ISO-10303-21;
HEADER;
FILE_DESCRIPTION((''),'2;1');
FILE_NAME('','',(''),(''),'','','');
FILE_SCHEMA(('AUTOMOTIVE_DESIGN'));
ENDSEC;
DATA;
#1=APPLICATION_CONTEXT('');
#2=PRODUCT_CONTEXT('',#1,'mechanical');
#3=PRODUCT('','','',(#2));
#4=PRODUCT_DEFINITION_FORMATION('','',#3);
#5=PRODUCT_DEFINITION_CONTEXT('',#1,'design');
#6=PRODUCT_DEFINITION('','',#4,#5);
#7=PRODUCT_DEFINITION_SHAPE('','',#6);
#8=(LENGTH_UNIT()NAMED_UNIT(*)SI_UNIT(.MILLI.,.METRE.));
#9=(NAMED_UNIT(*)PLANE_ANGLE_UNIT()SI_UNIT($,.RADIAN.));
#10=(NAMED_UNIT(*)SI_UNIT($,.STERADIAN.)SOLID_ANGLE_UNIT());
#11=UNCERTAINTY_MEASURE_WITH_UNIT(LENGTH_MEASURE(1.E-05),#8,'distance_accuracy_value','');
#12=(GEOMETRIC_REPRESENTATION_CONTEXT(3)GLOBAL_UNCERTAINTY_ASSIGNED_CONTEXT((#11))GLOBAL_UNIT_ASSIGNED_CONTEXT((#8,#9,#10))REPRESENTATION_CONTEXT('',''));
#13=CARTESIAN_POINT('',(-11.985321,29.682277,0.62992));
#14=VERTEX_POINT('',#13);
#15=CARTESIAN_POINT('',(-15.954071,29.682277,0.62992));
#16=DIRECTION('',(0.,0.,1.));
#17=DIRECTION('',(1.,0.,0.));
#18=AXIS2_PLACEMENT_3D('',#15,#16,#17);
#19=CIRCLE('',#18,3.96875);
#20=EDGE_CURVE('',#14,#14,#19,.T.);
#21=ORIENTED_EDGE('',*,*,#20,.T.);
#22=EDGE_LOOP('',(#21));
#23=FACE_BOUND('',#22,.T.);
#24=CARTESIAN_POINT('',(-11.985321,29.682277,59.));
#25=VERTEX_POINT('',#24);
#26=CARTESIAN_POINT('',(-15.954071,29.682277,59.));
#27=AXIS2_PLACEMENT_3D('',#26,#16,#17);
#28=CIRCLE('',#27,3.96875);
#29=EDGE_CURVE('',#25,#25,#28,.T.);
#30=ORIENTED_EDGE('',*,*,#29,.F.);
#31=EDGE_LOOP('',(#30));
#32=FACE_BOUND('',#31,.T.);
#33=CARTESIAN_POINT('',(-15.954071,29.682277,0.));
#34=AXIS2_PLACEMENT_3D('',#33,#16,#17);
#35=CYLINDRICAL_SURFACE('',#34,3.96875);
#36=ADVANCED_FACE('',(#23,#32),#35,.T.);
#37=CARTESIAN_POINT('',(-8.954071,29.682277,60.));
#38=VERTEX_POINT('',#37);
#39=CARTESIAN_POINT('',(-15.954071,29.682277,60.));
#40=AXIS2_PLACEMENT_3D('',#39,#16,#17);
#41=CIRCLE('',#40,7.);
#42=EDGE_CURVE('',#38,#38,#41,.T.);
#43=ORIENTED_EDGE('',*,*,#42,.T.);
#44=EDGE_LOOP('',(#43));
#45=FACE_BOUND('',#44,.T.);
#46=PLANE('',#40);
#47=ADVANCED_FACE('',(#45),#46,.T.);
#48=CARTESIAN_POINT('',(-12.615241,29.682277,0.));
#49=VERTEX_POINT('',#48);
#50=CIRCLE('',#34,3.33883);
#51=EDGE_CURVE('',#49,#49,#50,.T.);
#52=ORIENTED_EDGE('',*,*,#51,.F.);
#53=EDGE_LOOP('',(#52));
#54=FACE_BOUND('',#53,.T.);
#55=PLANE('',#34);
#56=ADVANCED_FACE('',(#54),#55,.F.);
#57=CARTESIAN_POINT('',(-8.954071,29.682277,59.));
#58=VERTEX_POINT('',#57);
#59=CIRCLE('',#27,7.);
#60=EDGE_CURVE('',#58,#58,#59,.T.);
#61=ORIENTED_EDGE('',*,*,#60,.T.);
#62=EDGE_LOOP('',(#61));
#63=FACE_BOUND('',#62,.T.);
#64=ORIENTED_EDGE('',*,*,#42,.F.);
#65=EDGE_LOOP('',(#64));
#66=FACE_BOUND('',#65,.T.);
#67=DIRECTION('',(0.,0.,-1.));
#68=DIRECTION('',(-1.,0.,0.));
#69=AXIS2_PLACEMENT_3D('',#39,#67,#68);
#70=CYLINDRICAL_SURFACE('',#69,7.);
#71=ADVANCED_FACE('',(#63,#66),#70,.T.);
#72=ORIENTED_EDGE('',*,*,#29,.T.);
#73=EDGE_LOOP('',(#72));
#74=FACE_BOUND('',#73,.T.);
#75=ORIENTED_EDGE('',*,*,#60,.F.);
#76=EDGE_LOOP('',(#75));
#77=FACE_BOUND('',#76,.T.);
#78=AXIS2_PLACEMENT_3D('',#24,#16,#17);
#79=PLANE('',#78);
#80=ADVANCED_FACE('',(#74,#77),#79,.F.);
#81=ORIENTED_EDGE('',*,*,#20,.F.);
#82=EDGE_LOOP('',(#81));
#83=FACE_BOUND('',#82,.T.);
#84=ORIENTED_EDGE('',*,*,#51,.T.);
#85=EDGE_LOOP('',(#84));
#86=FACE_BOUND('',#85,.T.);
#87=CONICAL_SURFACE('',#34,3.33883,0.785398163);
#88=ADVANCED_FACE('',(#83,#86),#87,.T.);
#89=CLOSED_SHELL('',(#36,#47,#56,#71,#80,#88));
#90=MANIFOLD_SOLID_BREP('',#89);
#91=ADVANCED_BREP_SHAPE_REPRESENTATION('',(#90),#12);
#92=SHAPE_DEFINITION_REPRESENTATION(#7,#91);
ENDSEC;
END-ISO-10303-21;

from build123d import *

# Parameters (mm, degrees)
SKETCH_1_R      = 7
EXTRUDE_2_DEPTH = 60


# Read off the part's stored shape, not the designer's step: 5/16-24 机械螺纹 螺柱1
with BuildPart() as part:
    # 草图1 → 凸台-拉伸2 (new body)
    with BuildSketch(Plane.XY):
        with Locations((-15.954071257, 29.682276751)):
            Circle(SKETCH_1_R)
    extrude(amount=EXTRUDE_2_DEPTH)

    # 5/16-24 机械螺纹 螺柱1 outline → 5/16-24 机械螺纹 螺柱1 (revolve, cut)
    with BuildSketch(Plane(origin=(-15.954071257, 29.682276751, 0), x_dir=(1, 0, 0), z_dir=(0, -1, 0))):
        Polygon((3.33883, 0), (7, 0), (7, 59), (3.96875, 59), (3.96875, 0.62992), align=None)
    revolve(axis=Axis((-15.954071257, 29.682276751, 0), (0, 0, 1)), mode=Mode.SUBTRACT)


solid = part.part
